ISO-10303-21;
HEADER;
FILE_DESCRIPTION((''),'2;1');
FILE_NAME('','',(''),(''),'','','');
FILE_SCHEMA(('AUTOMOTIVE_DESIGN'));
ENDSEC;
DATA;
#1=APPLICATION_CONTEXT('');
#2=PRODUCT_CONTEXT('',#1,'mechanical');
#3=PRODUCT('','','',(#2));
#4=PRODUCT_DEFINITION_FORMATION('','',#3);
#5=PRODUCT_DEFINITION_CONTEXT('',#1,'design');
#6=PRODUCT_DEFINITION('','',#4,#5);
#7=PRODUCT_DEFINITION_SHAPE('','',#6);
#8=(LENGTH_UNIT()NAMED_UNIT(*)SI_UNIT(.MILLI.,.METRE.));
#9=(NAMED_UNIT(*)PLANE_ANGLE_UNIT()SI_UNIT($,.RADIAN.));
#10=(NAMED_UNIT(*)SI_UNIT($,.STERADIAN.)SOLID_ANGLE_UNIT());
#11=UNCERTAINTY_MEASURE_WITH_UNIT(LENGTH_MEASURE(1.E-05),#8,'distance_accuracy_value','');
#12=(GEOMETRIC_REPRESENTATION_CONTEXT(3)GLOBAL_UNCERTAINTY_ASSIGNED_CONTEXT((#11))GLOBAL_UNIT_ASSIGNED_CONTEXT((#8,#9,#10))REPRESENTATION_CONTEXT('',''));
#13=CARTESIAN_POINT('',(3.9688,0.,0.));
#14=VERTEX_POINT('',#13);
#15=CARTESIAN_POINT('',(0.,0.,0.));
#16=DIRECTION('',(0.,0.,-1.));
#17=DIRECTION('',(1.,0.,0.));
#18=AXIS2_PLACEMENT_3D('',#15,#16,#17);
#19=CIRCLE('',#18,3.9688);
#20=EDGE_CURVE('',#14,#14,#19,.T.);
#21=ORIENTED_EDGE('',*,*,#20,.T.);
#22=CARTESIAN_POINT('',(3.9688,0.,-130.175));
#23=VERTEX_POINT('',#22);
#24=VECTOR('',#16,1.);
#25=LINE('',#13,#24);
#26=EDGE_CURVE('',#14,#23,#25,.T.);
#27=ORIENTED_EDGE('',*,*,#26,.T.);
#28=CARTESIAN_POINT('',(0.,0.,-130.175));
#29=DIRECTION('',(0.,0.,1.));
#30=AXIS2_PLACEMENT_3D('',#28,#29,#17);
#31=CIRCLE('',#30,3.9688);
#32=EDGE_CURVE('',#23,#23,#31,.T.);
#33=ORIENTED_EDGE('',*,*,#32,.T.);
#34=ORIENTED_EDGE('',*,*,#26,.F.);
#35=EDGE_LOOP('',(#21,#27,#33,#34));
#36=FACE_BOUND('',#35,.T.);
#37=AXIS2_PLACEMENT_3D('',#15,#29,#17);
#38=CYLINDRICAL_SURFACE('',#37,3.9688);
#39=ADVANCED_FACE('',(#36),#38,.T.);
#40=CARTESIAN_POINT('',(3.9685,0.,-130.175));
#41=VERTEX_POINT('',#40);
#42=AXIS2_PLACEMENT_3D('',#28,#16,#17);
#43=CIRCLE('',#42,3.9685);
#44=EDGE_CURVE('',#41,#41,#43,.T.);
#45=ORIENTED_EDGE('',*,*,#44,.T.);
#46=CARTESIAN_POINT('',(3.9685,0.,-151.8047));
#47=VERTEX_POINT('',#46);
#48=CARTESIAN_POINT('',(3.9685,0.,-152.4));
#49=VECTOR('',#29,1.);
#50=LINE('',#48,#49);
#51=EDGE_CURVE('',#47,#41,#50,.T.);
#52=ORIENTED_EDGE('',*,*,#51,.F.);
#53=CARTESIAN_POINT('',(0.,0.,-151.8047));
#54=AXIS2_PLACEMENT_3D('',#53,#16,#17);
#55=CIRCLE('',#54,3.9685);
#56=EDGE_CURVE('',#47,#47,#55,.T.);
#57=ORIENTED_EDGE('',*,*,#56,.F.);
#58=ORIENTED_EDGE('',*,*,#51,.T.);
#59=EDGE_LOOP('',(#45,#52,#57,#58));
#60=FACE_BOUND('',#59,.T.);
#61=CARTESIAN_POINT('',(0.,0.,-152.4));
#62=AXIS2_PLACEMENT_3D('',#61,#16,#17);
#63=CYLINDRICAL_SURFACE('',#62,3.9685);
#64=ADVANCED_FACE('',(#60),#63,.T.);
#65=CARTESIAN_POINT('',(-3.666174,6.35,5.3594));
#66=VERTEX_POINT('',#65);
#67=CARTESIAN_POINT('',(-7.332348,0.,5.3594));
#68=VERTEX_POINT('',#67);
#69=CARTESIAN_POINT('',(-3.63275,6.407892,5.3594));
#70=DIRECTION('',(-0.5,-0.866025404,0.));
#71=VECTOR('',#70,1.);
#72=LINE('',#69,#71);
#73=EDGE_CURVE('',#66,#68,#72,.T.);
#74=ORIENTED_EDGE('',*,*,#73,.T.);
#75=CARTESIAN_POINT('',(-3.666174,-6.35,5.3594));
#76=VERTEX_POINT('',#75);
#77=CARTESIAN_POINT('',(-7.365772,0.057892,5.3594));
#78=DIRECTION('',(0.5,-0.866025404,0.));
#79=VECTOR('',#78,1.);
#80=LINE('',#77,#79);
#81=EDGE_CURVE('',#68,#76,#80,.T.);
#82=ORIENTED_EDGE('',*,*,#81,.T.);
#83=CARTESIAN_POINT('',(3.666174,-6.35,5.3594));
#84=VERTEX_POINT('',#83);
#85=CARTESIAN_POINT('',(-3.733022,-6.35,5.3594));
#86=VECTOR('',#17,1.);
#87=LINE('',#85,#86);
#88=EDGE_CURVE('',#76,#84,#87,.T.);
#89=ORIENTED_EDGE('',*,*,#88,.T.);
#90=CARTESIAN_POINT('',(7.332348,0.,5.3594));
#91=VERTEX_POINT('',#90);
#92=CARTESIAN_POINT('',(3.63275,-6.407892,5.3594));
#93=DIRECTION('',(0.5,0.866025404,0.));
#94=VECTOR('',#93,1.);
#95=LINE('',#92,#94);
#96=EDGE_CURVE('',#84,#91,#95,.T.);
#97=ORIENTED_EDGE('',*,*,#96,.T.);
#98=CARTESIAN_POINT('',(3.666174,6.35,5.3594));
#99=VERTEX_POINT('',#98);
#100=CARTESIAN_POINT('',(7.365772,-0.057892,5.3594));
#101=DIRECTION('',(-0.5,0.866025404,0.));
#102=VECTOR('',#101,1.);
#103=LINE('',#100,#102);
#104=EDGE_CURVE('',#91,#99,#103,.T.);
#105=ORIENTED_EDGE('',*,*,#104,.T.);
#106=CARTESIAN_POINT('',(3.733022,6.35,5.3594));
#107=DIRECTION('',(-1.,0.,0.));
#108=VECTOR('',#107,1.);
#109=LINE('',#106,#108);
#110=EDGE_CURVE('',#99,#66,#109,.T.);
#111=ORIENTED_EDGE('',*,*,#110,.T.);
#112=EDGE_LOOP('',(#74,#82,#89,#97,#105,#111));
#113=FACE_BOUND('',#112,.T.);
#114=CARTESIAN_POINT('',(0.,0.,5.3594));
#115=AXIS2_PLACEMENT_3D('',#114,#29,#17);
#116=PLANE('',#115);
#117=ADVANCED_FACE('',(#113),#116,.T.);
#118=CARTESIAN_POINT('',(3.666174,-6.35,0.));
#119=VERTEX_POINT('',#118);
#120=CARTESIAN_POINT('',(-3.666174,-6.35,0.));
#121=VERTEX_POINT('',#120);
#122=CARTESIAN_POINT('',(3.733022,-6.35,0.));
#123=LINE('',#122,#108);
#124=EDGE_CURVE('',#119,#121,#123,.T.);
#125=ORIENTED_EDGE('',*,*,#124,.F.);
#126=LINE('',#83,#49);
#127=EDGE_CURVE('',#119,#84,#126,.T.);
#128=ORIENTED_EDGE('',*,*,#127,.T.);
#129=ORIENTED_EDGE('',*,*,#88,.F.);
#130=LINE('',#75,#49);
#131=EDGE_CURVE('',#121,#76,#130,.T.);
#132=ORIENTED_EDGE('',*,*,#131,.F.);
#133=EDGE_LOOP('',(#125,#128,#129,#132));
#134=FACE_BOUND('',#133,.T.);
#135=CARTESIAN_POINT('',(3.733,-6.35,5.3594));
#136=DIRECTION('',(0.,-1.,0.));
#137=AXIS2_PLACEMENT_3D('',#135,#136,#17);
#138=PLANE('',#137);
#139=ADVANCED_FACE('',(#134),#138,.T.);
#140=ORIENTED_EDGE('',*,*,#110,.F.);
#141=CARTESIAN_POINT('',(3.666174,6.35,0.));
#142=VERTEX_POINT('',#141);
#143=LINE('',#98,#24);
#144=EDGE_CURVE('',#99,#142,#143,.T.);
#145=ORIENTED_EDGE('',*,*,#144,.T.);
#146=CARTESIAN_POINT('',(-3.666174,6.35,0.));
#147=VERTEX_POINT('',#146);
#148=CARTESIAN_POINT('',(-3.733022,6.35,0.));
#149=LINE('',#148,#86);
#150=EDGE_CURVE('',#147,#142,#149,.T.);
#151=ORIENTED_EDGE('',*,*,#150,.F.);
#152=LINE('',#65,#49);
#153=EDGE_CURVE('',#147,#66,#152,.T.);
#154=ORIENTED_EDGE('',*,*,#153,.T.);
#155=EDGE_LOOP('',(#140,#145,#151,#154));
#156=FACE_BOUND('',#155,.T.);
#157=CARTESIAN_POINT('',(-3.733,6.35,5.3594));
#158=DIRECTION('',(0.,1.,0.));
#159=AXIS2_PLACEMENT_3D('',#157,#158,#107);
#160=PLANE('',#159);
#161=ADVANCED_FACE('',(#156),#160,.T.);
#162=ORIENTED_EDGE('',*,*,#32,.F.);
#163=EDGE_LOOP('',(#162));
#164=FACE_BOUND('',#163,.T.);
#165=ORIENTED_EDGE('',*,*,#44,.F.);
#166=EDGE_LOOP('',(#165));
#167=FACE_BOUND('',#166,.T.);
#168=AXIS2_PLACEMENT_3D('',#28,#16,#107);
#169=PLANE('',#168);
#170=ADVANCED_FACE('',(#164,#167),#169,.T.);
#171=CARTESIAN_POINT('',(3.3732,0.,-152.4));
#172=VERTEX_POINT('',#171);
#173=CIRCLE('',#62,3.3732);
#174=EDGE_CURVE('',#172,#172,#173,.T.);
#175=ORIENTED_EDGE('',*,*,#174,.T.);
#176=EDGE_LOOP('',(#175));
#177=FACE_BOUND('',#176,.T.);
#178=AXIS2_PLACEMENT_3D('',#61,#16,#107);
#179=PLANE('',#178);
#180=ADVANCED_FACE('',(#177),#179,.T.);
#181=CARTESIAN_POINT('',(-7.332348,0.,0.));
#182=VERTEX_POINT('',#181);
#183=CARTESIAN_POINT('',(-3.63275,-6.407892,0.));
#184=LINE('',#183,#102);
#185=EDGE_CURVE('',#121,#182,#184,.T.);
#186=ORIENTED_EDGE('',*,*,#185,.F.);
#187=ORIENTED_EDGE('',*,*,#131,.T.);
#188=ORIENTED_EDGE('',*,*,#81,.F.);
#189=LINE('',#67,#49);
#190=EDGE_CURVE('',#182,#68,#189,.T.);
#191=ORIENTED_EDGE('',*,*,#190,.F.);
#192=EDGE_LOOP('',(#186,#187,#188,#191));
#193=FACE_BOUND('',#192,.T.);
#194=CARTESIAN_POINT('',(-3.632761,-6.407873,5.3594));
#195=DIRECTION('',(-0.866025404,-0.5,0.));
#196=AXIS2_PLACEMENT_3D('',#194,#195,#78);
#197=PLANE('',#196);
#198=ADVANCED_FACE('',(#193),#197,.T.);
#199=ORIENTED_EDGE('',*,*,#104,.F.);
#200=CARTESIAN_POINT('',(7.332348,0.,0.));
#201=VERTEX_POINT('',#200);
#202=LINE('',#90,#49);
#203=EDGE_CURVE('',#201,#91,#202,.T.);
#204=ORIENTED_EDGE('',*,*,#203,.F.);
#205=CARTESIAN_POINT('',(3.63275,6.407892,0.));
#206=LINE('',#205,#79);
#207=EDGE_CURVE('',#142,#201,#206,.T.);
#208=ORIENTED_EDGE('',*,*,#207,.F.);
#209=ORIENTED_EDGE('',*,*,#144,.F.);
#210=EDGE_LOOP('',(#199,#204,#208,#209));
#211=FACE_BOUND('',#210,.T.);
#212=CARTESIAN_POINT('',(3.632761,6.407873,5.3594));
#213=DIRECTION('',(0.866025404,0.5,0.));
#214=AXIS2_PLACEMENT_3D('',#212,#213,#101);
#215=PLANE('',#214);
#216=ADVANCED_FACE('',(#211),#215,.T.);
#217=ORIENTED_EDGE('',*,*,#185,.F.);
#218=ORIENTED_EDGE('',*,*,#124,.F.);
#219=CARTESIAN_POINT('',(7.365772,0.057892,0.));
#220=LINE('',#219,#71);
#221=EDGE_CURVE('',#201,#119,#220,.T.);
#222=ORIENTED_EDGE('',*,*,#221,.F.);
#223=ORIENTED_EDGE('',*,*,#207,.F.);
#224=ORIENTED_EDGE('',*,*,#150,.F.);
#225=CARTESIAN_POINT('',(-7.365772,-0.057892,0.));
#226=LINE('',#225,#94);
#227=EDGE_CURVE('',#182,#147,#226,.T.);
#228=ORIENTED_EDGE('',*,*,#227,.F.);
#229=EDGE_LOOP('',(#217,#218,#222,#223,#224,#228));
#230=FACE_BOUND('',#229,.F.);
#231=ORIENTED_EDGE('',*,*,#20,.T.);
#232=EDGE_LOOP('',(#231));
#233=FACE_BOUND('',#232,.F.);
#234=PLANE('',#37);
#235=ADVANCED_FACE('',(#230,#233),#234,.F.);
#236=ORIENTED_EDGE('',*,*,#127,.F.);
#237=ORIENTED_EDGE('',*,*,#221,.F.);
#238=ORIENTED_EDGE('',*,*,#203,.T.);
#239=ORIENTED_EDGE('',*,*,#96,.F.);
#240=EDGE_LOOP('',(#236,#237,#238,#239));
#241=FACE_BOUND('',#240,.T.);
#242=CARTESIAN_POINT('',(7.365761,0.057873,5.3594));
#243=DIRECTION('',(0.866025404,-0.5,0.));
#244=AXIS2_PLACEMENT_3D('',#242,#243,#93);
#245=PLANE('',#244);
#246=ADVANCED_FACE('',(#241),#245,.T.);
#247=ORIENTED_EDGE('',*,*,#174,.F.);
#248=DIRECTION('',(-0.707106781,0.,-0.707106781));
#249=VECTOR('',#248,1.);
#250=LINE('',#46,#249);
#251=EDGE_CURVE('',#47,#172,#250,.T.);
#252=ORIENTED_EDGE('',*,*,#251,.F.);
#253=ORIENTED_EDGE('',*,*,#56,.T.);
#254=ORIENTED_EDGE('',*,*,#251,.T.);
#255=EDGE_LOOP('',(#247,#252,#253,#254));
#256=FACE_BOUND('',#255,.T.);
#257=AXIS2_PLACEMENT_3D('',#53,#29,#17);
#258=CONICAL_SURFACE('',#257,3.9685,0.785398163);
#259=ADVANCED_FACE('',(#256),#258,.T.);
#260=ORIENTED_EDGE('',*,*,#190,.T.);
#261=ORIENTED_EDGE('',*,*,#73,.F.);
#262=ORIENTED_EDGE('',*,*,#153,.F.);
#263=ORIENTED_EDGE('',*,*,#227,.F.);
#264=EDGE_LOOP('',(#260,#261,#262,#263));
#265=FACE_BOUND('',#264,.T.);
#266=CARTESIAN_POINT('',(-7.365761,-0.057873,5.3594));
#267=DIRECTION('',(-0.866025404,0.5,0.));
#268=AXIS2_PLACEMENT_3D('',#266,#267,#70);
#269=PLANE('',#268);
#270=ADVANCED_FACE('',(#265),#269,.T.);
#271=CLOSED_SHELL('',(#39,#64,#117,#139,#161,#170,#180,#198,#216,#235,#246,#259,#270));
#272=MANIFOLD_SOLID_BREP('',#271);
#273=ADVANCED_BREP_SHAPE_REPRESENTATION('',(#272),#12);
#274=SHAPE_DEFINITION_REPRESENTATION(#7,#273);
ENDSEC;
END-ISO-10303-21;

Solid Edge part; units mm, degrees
sketch "Sketch1" plane through (0, 0, 0) normal (0, 0, 1) x (1, 0, 0)
  circle A0 centre (0, 0) radius 7.366
  dimension "D1" = 14.732
extrude "Protrusion1" add sketch "Sketch1" along normal blind 5.3594
sketch "Sketch2" plane through (0, 0, 0) normal (0, 0, -1) x (1, 0, 0)
  circle A0 centre (0, 0) radius 3.9688
extrude "Protrusion2" add sketch "Sketch2" along normal blind 152.4
sketch "Sketch3" plane through (0, 0, -152.4) normal (0, 0, -1) x (1, 0, 0)
  circle A0 centre (0, 0) radius 3.9685
extrude "Cutout1" cut sketch "Sketch3" against normal blind 22.225 flip side to cut
chamfer "Chamfer_1" distance 0.5953 angle 45 1 edges at (-3.9685, 0, -152.4)
sketch "Sketch4" plane through (0, 0, 5.3594) normal (0, 0, 1) x (1, 0, 0)
  line L0 (-3.733, 6.35) -> (3.733, 6.35)
  dimension "D1" = 12.7
extrude "Cutout2" cut sketch "Sketch4" against normal up to next material side at (0, 6.4, 5.3594)
pattern_circular "Pattern1" count 6 over 360 about axis through (0, 0, 5.3594) along (0, 0, 1) of "Cutout2"
properties part number "117149"
